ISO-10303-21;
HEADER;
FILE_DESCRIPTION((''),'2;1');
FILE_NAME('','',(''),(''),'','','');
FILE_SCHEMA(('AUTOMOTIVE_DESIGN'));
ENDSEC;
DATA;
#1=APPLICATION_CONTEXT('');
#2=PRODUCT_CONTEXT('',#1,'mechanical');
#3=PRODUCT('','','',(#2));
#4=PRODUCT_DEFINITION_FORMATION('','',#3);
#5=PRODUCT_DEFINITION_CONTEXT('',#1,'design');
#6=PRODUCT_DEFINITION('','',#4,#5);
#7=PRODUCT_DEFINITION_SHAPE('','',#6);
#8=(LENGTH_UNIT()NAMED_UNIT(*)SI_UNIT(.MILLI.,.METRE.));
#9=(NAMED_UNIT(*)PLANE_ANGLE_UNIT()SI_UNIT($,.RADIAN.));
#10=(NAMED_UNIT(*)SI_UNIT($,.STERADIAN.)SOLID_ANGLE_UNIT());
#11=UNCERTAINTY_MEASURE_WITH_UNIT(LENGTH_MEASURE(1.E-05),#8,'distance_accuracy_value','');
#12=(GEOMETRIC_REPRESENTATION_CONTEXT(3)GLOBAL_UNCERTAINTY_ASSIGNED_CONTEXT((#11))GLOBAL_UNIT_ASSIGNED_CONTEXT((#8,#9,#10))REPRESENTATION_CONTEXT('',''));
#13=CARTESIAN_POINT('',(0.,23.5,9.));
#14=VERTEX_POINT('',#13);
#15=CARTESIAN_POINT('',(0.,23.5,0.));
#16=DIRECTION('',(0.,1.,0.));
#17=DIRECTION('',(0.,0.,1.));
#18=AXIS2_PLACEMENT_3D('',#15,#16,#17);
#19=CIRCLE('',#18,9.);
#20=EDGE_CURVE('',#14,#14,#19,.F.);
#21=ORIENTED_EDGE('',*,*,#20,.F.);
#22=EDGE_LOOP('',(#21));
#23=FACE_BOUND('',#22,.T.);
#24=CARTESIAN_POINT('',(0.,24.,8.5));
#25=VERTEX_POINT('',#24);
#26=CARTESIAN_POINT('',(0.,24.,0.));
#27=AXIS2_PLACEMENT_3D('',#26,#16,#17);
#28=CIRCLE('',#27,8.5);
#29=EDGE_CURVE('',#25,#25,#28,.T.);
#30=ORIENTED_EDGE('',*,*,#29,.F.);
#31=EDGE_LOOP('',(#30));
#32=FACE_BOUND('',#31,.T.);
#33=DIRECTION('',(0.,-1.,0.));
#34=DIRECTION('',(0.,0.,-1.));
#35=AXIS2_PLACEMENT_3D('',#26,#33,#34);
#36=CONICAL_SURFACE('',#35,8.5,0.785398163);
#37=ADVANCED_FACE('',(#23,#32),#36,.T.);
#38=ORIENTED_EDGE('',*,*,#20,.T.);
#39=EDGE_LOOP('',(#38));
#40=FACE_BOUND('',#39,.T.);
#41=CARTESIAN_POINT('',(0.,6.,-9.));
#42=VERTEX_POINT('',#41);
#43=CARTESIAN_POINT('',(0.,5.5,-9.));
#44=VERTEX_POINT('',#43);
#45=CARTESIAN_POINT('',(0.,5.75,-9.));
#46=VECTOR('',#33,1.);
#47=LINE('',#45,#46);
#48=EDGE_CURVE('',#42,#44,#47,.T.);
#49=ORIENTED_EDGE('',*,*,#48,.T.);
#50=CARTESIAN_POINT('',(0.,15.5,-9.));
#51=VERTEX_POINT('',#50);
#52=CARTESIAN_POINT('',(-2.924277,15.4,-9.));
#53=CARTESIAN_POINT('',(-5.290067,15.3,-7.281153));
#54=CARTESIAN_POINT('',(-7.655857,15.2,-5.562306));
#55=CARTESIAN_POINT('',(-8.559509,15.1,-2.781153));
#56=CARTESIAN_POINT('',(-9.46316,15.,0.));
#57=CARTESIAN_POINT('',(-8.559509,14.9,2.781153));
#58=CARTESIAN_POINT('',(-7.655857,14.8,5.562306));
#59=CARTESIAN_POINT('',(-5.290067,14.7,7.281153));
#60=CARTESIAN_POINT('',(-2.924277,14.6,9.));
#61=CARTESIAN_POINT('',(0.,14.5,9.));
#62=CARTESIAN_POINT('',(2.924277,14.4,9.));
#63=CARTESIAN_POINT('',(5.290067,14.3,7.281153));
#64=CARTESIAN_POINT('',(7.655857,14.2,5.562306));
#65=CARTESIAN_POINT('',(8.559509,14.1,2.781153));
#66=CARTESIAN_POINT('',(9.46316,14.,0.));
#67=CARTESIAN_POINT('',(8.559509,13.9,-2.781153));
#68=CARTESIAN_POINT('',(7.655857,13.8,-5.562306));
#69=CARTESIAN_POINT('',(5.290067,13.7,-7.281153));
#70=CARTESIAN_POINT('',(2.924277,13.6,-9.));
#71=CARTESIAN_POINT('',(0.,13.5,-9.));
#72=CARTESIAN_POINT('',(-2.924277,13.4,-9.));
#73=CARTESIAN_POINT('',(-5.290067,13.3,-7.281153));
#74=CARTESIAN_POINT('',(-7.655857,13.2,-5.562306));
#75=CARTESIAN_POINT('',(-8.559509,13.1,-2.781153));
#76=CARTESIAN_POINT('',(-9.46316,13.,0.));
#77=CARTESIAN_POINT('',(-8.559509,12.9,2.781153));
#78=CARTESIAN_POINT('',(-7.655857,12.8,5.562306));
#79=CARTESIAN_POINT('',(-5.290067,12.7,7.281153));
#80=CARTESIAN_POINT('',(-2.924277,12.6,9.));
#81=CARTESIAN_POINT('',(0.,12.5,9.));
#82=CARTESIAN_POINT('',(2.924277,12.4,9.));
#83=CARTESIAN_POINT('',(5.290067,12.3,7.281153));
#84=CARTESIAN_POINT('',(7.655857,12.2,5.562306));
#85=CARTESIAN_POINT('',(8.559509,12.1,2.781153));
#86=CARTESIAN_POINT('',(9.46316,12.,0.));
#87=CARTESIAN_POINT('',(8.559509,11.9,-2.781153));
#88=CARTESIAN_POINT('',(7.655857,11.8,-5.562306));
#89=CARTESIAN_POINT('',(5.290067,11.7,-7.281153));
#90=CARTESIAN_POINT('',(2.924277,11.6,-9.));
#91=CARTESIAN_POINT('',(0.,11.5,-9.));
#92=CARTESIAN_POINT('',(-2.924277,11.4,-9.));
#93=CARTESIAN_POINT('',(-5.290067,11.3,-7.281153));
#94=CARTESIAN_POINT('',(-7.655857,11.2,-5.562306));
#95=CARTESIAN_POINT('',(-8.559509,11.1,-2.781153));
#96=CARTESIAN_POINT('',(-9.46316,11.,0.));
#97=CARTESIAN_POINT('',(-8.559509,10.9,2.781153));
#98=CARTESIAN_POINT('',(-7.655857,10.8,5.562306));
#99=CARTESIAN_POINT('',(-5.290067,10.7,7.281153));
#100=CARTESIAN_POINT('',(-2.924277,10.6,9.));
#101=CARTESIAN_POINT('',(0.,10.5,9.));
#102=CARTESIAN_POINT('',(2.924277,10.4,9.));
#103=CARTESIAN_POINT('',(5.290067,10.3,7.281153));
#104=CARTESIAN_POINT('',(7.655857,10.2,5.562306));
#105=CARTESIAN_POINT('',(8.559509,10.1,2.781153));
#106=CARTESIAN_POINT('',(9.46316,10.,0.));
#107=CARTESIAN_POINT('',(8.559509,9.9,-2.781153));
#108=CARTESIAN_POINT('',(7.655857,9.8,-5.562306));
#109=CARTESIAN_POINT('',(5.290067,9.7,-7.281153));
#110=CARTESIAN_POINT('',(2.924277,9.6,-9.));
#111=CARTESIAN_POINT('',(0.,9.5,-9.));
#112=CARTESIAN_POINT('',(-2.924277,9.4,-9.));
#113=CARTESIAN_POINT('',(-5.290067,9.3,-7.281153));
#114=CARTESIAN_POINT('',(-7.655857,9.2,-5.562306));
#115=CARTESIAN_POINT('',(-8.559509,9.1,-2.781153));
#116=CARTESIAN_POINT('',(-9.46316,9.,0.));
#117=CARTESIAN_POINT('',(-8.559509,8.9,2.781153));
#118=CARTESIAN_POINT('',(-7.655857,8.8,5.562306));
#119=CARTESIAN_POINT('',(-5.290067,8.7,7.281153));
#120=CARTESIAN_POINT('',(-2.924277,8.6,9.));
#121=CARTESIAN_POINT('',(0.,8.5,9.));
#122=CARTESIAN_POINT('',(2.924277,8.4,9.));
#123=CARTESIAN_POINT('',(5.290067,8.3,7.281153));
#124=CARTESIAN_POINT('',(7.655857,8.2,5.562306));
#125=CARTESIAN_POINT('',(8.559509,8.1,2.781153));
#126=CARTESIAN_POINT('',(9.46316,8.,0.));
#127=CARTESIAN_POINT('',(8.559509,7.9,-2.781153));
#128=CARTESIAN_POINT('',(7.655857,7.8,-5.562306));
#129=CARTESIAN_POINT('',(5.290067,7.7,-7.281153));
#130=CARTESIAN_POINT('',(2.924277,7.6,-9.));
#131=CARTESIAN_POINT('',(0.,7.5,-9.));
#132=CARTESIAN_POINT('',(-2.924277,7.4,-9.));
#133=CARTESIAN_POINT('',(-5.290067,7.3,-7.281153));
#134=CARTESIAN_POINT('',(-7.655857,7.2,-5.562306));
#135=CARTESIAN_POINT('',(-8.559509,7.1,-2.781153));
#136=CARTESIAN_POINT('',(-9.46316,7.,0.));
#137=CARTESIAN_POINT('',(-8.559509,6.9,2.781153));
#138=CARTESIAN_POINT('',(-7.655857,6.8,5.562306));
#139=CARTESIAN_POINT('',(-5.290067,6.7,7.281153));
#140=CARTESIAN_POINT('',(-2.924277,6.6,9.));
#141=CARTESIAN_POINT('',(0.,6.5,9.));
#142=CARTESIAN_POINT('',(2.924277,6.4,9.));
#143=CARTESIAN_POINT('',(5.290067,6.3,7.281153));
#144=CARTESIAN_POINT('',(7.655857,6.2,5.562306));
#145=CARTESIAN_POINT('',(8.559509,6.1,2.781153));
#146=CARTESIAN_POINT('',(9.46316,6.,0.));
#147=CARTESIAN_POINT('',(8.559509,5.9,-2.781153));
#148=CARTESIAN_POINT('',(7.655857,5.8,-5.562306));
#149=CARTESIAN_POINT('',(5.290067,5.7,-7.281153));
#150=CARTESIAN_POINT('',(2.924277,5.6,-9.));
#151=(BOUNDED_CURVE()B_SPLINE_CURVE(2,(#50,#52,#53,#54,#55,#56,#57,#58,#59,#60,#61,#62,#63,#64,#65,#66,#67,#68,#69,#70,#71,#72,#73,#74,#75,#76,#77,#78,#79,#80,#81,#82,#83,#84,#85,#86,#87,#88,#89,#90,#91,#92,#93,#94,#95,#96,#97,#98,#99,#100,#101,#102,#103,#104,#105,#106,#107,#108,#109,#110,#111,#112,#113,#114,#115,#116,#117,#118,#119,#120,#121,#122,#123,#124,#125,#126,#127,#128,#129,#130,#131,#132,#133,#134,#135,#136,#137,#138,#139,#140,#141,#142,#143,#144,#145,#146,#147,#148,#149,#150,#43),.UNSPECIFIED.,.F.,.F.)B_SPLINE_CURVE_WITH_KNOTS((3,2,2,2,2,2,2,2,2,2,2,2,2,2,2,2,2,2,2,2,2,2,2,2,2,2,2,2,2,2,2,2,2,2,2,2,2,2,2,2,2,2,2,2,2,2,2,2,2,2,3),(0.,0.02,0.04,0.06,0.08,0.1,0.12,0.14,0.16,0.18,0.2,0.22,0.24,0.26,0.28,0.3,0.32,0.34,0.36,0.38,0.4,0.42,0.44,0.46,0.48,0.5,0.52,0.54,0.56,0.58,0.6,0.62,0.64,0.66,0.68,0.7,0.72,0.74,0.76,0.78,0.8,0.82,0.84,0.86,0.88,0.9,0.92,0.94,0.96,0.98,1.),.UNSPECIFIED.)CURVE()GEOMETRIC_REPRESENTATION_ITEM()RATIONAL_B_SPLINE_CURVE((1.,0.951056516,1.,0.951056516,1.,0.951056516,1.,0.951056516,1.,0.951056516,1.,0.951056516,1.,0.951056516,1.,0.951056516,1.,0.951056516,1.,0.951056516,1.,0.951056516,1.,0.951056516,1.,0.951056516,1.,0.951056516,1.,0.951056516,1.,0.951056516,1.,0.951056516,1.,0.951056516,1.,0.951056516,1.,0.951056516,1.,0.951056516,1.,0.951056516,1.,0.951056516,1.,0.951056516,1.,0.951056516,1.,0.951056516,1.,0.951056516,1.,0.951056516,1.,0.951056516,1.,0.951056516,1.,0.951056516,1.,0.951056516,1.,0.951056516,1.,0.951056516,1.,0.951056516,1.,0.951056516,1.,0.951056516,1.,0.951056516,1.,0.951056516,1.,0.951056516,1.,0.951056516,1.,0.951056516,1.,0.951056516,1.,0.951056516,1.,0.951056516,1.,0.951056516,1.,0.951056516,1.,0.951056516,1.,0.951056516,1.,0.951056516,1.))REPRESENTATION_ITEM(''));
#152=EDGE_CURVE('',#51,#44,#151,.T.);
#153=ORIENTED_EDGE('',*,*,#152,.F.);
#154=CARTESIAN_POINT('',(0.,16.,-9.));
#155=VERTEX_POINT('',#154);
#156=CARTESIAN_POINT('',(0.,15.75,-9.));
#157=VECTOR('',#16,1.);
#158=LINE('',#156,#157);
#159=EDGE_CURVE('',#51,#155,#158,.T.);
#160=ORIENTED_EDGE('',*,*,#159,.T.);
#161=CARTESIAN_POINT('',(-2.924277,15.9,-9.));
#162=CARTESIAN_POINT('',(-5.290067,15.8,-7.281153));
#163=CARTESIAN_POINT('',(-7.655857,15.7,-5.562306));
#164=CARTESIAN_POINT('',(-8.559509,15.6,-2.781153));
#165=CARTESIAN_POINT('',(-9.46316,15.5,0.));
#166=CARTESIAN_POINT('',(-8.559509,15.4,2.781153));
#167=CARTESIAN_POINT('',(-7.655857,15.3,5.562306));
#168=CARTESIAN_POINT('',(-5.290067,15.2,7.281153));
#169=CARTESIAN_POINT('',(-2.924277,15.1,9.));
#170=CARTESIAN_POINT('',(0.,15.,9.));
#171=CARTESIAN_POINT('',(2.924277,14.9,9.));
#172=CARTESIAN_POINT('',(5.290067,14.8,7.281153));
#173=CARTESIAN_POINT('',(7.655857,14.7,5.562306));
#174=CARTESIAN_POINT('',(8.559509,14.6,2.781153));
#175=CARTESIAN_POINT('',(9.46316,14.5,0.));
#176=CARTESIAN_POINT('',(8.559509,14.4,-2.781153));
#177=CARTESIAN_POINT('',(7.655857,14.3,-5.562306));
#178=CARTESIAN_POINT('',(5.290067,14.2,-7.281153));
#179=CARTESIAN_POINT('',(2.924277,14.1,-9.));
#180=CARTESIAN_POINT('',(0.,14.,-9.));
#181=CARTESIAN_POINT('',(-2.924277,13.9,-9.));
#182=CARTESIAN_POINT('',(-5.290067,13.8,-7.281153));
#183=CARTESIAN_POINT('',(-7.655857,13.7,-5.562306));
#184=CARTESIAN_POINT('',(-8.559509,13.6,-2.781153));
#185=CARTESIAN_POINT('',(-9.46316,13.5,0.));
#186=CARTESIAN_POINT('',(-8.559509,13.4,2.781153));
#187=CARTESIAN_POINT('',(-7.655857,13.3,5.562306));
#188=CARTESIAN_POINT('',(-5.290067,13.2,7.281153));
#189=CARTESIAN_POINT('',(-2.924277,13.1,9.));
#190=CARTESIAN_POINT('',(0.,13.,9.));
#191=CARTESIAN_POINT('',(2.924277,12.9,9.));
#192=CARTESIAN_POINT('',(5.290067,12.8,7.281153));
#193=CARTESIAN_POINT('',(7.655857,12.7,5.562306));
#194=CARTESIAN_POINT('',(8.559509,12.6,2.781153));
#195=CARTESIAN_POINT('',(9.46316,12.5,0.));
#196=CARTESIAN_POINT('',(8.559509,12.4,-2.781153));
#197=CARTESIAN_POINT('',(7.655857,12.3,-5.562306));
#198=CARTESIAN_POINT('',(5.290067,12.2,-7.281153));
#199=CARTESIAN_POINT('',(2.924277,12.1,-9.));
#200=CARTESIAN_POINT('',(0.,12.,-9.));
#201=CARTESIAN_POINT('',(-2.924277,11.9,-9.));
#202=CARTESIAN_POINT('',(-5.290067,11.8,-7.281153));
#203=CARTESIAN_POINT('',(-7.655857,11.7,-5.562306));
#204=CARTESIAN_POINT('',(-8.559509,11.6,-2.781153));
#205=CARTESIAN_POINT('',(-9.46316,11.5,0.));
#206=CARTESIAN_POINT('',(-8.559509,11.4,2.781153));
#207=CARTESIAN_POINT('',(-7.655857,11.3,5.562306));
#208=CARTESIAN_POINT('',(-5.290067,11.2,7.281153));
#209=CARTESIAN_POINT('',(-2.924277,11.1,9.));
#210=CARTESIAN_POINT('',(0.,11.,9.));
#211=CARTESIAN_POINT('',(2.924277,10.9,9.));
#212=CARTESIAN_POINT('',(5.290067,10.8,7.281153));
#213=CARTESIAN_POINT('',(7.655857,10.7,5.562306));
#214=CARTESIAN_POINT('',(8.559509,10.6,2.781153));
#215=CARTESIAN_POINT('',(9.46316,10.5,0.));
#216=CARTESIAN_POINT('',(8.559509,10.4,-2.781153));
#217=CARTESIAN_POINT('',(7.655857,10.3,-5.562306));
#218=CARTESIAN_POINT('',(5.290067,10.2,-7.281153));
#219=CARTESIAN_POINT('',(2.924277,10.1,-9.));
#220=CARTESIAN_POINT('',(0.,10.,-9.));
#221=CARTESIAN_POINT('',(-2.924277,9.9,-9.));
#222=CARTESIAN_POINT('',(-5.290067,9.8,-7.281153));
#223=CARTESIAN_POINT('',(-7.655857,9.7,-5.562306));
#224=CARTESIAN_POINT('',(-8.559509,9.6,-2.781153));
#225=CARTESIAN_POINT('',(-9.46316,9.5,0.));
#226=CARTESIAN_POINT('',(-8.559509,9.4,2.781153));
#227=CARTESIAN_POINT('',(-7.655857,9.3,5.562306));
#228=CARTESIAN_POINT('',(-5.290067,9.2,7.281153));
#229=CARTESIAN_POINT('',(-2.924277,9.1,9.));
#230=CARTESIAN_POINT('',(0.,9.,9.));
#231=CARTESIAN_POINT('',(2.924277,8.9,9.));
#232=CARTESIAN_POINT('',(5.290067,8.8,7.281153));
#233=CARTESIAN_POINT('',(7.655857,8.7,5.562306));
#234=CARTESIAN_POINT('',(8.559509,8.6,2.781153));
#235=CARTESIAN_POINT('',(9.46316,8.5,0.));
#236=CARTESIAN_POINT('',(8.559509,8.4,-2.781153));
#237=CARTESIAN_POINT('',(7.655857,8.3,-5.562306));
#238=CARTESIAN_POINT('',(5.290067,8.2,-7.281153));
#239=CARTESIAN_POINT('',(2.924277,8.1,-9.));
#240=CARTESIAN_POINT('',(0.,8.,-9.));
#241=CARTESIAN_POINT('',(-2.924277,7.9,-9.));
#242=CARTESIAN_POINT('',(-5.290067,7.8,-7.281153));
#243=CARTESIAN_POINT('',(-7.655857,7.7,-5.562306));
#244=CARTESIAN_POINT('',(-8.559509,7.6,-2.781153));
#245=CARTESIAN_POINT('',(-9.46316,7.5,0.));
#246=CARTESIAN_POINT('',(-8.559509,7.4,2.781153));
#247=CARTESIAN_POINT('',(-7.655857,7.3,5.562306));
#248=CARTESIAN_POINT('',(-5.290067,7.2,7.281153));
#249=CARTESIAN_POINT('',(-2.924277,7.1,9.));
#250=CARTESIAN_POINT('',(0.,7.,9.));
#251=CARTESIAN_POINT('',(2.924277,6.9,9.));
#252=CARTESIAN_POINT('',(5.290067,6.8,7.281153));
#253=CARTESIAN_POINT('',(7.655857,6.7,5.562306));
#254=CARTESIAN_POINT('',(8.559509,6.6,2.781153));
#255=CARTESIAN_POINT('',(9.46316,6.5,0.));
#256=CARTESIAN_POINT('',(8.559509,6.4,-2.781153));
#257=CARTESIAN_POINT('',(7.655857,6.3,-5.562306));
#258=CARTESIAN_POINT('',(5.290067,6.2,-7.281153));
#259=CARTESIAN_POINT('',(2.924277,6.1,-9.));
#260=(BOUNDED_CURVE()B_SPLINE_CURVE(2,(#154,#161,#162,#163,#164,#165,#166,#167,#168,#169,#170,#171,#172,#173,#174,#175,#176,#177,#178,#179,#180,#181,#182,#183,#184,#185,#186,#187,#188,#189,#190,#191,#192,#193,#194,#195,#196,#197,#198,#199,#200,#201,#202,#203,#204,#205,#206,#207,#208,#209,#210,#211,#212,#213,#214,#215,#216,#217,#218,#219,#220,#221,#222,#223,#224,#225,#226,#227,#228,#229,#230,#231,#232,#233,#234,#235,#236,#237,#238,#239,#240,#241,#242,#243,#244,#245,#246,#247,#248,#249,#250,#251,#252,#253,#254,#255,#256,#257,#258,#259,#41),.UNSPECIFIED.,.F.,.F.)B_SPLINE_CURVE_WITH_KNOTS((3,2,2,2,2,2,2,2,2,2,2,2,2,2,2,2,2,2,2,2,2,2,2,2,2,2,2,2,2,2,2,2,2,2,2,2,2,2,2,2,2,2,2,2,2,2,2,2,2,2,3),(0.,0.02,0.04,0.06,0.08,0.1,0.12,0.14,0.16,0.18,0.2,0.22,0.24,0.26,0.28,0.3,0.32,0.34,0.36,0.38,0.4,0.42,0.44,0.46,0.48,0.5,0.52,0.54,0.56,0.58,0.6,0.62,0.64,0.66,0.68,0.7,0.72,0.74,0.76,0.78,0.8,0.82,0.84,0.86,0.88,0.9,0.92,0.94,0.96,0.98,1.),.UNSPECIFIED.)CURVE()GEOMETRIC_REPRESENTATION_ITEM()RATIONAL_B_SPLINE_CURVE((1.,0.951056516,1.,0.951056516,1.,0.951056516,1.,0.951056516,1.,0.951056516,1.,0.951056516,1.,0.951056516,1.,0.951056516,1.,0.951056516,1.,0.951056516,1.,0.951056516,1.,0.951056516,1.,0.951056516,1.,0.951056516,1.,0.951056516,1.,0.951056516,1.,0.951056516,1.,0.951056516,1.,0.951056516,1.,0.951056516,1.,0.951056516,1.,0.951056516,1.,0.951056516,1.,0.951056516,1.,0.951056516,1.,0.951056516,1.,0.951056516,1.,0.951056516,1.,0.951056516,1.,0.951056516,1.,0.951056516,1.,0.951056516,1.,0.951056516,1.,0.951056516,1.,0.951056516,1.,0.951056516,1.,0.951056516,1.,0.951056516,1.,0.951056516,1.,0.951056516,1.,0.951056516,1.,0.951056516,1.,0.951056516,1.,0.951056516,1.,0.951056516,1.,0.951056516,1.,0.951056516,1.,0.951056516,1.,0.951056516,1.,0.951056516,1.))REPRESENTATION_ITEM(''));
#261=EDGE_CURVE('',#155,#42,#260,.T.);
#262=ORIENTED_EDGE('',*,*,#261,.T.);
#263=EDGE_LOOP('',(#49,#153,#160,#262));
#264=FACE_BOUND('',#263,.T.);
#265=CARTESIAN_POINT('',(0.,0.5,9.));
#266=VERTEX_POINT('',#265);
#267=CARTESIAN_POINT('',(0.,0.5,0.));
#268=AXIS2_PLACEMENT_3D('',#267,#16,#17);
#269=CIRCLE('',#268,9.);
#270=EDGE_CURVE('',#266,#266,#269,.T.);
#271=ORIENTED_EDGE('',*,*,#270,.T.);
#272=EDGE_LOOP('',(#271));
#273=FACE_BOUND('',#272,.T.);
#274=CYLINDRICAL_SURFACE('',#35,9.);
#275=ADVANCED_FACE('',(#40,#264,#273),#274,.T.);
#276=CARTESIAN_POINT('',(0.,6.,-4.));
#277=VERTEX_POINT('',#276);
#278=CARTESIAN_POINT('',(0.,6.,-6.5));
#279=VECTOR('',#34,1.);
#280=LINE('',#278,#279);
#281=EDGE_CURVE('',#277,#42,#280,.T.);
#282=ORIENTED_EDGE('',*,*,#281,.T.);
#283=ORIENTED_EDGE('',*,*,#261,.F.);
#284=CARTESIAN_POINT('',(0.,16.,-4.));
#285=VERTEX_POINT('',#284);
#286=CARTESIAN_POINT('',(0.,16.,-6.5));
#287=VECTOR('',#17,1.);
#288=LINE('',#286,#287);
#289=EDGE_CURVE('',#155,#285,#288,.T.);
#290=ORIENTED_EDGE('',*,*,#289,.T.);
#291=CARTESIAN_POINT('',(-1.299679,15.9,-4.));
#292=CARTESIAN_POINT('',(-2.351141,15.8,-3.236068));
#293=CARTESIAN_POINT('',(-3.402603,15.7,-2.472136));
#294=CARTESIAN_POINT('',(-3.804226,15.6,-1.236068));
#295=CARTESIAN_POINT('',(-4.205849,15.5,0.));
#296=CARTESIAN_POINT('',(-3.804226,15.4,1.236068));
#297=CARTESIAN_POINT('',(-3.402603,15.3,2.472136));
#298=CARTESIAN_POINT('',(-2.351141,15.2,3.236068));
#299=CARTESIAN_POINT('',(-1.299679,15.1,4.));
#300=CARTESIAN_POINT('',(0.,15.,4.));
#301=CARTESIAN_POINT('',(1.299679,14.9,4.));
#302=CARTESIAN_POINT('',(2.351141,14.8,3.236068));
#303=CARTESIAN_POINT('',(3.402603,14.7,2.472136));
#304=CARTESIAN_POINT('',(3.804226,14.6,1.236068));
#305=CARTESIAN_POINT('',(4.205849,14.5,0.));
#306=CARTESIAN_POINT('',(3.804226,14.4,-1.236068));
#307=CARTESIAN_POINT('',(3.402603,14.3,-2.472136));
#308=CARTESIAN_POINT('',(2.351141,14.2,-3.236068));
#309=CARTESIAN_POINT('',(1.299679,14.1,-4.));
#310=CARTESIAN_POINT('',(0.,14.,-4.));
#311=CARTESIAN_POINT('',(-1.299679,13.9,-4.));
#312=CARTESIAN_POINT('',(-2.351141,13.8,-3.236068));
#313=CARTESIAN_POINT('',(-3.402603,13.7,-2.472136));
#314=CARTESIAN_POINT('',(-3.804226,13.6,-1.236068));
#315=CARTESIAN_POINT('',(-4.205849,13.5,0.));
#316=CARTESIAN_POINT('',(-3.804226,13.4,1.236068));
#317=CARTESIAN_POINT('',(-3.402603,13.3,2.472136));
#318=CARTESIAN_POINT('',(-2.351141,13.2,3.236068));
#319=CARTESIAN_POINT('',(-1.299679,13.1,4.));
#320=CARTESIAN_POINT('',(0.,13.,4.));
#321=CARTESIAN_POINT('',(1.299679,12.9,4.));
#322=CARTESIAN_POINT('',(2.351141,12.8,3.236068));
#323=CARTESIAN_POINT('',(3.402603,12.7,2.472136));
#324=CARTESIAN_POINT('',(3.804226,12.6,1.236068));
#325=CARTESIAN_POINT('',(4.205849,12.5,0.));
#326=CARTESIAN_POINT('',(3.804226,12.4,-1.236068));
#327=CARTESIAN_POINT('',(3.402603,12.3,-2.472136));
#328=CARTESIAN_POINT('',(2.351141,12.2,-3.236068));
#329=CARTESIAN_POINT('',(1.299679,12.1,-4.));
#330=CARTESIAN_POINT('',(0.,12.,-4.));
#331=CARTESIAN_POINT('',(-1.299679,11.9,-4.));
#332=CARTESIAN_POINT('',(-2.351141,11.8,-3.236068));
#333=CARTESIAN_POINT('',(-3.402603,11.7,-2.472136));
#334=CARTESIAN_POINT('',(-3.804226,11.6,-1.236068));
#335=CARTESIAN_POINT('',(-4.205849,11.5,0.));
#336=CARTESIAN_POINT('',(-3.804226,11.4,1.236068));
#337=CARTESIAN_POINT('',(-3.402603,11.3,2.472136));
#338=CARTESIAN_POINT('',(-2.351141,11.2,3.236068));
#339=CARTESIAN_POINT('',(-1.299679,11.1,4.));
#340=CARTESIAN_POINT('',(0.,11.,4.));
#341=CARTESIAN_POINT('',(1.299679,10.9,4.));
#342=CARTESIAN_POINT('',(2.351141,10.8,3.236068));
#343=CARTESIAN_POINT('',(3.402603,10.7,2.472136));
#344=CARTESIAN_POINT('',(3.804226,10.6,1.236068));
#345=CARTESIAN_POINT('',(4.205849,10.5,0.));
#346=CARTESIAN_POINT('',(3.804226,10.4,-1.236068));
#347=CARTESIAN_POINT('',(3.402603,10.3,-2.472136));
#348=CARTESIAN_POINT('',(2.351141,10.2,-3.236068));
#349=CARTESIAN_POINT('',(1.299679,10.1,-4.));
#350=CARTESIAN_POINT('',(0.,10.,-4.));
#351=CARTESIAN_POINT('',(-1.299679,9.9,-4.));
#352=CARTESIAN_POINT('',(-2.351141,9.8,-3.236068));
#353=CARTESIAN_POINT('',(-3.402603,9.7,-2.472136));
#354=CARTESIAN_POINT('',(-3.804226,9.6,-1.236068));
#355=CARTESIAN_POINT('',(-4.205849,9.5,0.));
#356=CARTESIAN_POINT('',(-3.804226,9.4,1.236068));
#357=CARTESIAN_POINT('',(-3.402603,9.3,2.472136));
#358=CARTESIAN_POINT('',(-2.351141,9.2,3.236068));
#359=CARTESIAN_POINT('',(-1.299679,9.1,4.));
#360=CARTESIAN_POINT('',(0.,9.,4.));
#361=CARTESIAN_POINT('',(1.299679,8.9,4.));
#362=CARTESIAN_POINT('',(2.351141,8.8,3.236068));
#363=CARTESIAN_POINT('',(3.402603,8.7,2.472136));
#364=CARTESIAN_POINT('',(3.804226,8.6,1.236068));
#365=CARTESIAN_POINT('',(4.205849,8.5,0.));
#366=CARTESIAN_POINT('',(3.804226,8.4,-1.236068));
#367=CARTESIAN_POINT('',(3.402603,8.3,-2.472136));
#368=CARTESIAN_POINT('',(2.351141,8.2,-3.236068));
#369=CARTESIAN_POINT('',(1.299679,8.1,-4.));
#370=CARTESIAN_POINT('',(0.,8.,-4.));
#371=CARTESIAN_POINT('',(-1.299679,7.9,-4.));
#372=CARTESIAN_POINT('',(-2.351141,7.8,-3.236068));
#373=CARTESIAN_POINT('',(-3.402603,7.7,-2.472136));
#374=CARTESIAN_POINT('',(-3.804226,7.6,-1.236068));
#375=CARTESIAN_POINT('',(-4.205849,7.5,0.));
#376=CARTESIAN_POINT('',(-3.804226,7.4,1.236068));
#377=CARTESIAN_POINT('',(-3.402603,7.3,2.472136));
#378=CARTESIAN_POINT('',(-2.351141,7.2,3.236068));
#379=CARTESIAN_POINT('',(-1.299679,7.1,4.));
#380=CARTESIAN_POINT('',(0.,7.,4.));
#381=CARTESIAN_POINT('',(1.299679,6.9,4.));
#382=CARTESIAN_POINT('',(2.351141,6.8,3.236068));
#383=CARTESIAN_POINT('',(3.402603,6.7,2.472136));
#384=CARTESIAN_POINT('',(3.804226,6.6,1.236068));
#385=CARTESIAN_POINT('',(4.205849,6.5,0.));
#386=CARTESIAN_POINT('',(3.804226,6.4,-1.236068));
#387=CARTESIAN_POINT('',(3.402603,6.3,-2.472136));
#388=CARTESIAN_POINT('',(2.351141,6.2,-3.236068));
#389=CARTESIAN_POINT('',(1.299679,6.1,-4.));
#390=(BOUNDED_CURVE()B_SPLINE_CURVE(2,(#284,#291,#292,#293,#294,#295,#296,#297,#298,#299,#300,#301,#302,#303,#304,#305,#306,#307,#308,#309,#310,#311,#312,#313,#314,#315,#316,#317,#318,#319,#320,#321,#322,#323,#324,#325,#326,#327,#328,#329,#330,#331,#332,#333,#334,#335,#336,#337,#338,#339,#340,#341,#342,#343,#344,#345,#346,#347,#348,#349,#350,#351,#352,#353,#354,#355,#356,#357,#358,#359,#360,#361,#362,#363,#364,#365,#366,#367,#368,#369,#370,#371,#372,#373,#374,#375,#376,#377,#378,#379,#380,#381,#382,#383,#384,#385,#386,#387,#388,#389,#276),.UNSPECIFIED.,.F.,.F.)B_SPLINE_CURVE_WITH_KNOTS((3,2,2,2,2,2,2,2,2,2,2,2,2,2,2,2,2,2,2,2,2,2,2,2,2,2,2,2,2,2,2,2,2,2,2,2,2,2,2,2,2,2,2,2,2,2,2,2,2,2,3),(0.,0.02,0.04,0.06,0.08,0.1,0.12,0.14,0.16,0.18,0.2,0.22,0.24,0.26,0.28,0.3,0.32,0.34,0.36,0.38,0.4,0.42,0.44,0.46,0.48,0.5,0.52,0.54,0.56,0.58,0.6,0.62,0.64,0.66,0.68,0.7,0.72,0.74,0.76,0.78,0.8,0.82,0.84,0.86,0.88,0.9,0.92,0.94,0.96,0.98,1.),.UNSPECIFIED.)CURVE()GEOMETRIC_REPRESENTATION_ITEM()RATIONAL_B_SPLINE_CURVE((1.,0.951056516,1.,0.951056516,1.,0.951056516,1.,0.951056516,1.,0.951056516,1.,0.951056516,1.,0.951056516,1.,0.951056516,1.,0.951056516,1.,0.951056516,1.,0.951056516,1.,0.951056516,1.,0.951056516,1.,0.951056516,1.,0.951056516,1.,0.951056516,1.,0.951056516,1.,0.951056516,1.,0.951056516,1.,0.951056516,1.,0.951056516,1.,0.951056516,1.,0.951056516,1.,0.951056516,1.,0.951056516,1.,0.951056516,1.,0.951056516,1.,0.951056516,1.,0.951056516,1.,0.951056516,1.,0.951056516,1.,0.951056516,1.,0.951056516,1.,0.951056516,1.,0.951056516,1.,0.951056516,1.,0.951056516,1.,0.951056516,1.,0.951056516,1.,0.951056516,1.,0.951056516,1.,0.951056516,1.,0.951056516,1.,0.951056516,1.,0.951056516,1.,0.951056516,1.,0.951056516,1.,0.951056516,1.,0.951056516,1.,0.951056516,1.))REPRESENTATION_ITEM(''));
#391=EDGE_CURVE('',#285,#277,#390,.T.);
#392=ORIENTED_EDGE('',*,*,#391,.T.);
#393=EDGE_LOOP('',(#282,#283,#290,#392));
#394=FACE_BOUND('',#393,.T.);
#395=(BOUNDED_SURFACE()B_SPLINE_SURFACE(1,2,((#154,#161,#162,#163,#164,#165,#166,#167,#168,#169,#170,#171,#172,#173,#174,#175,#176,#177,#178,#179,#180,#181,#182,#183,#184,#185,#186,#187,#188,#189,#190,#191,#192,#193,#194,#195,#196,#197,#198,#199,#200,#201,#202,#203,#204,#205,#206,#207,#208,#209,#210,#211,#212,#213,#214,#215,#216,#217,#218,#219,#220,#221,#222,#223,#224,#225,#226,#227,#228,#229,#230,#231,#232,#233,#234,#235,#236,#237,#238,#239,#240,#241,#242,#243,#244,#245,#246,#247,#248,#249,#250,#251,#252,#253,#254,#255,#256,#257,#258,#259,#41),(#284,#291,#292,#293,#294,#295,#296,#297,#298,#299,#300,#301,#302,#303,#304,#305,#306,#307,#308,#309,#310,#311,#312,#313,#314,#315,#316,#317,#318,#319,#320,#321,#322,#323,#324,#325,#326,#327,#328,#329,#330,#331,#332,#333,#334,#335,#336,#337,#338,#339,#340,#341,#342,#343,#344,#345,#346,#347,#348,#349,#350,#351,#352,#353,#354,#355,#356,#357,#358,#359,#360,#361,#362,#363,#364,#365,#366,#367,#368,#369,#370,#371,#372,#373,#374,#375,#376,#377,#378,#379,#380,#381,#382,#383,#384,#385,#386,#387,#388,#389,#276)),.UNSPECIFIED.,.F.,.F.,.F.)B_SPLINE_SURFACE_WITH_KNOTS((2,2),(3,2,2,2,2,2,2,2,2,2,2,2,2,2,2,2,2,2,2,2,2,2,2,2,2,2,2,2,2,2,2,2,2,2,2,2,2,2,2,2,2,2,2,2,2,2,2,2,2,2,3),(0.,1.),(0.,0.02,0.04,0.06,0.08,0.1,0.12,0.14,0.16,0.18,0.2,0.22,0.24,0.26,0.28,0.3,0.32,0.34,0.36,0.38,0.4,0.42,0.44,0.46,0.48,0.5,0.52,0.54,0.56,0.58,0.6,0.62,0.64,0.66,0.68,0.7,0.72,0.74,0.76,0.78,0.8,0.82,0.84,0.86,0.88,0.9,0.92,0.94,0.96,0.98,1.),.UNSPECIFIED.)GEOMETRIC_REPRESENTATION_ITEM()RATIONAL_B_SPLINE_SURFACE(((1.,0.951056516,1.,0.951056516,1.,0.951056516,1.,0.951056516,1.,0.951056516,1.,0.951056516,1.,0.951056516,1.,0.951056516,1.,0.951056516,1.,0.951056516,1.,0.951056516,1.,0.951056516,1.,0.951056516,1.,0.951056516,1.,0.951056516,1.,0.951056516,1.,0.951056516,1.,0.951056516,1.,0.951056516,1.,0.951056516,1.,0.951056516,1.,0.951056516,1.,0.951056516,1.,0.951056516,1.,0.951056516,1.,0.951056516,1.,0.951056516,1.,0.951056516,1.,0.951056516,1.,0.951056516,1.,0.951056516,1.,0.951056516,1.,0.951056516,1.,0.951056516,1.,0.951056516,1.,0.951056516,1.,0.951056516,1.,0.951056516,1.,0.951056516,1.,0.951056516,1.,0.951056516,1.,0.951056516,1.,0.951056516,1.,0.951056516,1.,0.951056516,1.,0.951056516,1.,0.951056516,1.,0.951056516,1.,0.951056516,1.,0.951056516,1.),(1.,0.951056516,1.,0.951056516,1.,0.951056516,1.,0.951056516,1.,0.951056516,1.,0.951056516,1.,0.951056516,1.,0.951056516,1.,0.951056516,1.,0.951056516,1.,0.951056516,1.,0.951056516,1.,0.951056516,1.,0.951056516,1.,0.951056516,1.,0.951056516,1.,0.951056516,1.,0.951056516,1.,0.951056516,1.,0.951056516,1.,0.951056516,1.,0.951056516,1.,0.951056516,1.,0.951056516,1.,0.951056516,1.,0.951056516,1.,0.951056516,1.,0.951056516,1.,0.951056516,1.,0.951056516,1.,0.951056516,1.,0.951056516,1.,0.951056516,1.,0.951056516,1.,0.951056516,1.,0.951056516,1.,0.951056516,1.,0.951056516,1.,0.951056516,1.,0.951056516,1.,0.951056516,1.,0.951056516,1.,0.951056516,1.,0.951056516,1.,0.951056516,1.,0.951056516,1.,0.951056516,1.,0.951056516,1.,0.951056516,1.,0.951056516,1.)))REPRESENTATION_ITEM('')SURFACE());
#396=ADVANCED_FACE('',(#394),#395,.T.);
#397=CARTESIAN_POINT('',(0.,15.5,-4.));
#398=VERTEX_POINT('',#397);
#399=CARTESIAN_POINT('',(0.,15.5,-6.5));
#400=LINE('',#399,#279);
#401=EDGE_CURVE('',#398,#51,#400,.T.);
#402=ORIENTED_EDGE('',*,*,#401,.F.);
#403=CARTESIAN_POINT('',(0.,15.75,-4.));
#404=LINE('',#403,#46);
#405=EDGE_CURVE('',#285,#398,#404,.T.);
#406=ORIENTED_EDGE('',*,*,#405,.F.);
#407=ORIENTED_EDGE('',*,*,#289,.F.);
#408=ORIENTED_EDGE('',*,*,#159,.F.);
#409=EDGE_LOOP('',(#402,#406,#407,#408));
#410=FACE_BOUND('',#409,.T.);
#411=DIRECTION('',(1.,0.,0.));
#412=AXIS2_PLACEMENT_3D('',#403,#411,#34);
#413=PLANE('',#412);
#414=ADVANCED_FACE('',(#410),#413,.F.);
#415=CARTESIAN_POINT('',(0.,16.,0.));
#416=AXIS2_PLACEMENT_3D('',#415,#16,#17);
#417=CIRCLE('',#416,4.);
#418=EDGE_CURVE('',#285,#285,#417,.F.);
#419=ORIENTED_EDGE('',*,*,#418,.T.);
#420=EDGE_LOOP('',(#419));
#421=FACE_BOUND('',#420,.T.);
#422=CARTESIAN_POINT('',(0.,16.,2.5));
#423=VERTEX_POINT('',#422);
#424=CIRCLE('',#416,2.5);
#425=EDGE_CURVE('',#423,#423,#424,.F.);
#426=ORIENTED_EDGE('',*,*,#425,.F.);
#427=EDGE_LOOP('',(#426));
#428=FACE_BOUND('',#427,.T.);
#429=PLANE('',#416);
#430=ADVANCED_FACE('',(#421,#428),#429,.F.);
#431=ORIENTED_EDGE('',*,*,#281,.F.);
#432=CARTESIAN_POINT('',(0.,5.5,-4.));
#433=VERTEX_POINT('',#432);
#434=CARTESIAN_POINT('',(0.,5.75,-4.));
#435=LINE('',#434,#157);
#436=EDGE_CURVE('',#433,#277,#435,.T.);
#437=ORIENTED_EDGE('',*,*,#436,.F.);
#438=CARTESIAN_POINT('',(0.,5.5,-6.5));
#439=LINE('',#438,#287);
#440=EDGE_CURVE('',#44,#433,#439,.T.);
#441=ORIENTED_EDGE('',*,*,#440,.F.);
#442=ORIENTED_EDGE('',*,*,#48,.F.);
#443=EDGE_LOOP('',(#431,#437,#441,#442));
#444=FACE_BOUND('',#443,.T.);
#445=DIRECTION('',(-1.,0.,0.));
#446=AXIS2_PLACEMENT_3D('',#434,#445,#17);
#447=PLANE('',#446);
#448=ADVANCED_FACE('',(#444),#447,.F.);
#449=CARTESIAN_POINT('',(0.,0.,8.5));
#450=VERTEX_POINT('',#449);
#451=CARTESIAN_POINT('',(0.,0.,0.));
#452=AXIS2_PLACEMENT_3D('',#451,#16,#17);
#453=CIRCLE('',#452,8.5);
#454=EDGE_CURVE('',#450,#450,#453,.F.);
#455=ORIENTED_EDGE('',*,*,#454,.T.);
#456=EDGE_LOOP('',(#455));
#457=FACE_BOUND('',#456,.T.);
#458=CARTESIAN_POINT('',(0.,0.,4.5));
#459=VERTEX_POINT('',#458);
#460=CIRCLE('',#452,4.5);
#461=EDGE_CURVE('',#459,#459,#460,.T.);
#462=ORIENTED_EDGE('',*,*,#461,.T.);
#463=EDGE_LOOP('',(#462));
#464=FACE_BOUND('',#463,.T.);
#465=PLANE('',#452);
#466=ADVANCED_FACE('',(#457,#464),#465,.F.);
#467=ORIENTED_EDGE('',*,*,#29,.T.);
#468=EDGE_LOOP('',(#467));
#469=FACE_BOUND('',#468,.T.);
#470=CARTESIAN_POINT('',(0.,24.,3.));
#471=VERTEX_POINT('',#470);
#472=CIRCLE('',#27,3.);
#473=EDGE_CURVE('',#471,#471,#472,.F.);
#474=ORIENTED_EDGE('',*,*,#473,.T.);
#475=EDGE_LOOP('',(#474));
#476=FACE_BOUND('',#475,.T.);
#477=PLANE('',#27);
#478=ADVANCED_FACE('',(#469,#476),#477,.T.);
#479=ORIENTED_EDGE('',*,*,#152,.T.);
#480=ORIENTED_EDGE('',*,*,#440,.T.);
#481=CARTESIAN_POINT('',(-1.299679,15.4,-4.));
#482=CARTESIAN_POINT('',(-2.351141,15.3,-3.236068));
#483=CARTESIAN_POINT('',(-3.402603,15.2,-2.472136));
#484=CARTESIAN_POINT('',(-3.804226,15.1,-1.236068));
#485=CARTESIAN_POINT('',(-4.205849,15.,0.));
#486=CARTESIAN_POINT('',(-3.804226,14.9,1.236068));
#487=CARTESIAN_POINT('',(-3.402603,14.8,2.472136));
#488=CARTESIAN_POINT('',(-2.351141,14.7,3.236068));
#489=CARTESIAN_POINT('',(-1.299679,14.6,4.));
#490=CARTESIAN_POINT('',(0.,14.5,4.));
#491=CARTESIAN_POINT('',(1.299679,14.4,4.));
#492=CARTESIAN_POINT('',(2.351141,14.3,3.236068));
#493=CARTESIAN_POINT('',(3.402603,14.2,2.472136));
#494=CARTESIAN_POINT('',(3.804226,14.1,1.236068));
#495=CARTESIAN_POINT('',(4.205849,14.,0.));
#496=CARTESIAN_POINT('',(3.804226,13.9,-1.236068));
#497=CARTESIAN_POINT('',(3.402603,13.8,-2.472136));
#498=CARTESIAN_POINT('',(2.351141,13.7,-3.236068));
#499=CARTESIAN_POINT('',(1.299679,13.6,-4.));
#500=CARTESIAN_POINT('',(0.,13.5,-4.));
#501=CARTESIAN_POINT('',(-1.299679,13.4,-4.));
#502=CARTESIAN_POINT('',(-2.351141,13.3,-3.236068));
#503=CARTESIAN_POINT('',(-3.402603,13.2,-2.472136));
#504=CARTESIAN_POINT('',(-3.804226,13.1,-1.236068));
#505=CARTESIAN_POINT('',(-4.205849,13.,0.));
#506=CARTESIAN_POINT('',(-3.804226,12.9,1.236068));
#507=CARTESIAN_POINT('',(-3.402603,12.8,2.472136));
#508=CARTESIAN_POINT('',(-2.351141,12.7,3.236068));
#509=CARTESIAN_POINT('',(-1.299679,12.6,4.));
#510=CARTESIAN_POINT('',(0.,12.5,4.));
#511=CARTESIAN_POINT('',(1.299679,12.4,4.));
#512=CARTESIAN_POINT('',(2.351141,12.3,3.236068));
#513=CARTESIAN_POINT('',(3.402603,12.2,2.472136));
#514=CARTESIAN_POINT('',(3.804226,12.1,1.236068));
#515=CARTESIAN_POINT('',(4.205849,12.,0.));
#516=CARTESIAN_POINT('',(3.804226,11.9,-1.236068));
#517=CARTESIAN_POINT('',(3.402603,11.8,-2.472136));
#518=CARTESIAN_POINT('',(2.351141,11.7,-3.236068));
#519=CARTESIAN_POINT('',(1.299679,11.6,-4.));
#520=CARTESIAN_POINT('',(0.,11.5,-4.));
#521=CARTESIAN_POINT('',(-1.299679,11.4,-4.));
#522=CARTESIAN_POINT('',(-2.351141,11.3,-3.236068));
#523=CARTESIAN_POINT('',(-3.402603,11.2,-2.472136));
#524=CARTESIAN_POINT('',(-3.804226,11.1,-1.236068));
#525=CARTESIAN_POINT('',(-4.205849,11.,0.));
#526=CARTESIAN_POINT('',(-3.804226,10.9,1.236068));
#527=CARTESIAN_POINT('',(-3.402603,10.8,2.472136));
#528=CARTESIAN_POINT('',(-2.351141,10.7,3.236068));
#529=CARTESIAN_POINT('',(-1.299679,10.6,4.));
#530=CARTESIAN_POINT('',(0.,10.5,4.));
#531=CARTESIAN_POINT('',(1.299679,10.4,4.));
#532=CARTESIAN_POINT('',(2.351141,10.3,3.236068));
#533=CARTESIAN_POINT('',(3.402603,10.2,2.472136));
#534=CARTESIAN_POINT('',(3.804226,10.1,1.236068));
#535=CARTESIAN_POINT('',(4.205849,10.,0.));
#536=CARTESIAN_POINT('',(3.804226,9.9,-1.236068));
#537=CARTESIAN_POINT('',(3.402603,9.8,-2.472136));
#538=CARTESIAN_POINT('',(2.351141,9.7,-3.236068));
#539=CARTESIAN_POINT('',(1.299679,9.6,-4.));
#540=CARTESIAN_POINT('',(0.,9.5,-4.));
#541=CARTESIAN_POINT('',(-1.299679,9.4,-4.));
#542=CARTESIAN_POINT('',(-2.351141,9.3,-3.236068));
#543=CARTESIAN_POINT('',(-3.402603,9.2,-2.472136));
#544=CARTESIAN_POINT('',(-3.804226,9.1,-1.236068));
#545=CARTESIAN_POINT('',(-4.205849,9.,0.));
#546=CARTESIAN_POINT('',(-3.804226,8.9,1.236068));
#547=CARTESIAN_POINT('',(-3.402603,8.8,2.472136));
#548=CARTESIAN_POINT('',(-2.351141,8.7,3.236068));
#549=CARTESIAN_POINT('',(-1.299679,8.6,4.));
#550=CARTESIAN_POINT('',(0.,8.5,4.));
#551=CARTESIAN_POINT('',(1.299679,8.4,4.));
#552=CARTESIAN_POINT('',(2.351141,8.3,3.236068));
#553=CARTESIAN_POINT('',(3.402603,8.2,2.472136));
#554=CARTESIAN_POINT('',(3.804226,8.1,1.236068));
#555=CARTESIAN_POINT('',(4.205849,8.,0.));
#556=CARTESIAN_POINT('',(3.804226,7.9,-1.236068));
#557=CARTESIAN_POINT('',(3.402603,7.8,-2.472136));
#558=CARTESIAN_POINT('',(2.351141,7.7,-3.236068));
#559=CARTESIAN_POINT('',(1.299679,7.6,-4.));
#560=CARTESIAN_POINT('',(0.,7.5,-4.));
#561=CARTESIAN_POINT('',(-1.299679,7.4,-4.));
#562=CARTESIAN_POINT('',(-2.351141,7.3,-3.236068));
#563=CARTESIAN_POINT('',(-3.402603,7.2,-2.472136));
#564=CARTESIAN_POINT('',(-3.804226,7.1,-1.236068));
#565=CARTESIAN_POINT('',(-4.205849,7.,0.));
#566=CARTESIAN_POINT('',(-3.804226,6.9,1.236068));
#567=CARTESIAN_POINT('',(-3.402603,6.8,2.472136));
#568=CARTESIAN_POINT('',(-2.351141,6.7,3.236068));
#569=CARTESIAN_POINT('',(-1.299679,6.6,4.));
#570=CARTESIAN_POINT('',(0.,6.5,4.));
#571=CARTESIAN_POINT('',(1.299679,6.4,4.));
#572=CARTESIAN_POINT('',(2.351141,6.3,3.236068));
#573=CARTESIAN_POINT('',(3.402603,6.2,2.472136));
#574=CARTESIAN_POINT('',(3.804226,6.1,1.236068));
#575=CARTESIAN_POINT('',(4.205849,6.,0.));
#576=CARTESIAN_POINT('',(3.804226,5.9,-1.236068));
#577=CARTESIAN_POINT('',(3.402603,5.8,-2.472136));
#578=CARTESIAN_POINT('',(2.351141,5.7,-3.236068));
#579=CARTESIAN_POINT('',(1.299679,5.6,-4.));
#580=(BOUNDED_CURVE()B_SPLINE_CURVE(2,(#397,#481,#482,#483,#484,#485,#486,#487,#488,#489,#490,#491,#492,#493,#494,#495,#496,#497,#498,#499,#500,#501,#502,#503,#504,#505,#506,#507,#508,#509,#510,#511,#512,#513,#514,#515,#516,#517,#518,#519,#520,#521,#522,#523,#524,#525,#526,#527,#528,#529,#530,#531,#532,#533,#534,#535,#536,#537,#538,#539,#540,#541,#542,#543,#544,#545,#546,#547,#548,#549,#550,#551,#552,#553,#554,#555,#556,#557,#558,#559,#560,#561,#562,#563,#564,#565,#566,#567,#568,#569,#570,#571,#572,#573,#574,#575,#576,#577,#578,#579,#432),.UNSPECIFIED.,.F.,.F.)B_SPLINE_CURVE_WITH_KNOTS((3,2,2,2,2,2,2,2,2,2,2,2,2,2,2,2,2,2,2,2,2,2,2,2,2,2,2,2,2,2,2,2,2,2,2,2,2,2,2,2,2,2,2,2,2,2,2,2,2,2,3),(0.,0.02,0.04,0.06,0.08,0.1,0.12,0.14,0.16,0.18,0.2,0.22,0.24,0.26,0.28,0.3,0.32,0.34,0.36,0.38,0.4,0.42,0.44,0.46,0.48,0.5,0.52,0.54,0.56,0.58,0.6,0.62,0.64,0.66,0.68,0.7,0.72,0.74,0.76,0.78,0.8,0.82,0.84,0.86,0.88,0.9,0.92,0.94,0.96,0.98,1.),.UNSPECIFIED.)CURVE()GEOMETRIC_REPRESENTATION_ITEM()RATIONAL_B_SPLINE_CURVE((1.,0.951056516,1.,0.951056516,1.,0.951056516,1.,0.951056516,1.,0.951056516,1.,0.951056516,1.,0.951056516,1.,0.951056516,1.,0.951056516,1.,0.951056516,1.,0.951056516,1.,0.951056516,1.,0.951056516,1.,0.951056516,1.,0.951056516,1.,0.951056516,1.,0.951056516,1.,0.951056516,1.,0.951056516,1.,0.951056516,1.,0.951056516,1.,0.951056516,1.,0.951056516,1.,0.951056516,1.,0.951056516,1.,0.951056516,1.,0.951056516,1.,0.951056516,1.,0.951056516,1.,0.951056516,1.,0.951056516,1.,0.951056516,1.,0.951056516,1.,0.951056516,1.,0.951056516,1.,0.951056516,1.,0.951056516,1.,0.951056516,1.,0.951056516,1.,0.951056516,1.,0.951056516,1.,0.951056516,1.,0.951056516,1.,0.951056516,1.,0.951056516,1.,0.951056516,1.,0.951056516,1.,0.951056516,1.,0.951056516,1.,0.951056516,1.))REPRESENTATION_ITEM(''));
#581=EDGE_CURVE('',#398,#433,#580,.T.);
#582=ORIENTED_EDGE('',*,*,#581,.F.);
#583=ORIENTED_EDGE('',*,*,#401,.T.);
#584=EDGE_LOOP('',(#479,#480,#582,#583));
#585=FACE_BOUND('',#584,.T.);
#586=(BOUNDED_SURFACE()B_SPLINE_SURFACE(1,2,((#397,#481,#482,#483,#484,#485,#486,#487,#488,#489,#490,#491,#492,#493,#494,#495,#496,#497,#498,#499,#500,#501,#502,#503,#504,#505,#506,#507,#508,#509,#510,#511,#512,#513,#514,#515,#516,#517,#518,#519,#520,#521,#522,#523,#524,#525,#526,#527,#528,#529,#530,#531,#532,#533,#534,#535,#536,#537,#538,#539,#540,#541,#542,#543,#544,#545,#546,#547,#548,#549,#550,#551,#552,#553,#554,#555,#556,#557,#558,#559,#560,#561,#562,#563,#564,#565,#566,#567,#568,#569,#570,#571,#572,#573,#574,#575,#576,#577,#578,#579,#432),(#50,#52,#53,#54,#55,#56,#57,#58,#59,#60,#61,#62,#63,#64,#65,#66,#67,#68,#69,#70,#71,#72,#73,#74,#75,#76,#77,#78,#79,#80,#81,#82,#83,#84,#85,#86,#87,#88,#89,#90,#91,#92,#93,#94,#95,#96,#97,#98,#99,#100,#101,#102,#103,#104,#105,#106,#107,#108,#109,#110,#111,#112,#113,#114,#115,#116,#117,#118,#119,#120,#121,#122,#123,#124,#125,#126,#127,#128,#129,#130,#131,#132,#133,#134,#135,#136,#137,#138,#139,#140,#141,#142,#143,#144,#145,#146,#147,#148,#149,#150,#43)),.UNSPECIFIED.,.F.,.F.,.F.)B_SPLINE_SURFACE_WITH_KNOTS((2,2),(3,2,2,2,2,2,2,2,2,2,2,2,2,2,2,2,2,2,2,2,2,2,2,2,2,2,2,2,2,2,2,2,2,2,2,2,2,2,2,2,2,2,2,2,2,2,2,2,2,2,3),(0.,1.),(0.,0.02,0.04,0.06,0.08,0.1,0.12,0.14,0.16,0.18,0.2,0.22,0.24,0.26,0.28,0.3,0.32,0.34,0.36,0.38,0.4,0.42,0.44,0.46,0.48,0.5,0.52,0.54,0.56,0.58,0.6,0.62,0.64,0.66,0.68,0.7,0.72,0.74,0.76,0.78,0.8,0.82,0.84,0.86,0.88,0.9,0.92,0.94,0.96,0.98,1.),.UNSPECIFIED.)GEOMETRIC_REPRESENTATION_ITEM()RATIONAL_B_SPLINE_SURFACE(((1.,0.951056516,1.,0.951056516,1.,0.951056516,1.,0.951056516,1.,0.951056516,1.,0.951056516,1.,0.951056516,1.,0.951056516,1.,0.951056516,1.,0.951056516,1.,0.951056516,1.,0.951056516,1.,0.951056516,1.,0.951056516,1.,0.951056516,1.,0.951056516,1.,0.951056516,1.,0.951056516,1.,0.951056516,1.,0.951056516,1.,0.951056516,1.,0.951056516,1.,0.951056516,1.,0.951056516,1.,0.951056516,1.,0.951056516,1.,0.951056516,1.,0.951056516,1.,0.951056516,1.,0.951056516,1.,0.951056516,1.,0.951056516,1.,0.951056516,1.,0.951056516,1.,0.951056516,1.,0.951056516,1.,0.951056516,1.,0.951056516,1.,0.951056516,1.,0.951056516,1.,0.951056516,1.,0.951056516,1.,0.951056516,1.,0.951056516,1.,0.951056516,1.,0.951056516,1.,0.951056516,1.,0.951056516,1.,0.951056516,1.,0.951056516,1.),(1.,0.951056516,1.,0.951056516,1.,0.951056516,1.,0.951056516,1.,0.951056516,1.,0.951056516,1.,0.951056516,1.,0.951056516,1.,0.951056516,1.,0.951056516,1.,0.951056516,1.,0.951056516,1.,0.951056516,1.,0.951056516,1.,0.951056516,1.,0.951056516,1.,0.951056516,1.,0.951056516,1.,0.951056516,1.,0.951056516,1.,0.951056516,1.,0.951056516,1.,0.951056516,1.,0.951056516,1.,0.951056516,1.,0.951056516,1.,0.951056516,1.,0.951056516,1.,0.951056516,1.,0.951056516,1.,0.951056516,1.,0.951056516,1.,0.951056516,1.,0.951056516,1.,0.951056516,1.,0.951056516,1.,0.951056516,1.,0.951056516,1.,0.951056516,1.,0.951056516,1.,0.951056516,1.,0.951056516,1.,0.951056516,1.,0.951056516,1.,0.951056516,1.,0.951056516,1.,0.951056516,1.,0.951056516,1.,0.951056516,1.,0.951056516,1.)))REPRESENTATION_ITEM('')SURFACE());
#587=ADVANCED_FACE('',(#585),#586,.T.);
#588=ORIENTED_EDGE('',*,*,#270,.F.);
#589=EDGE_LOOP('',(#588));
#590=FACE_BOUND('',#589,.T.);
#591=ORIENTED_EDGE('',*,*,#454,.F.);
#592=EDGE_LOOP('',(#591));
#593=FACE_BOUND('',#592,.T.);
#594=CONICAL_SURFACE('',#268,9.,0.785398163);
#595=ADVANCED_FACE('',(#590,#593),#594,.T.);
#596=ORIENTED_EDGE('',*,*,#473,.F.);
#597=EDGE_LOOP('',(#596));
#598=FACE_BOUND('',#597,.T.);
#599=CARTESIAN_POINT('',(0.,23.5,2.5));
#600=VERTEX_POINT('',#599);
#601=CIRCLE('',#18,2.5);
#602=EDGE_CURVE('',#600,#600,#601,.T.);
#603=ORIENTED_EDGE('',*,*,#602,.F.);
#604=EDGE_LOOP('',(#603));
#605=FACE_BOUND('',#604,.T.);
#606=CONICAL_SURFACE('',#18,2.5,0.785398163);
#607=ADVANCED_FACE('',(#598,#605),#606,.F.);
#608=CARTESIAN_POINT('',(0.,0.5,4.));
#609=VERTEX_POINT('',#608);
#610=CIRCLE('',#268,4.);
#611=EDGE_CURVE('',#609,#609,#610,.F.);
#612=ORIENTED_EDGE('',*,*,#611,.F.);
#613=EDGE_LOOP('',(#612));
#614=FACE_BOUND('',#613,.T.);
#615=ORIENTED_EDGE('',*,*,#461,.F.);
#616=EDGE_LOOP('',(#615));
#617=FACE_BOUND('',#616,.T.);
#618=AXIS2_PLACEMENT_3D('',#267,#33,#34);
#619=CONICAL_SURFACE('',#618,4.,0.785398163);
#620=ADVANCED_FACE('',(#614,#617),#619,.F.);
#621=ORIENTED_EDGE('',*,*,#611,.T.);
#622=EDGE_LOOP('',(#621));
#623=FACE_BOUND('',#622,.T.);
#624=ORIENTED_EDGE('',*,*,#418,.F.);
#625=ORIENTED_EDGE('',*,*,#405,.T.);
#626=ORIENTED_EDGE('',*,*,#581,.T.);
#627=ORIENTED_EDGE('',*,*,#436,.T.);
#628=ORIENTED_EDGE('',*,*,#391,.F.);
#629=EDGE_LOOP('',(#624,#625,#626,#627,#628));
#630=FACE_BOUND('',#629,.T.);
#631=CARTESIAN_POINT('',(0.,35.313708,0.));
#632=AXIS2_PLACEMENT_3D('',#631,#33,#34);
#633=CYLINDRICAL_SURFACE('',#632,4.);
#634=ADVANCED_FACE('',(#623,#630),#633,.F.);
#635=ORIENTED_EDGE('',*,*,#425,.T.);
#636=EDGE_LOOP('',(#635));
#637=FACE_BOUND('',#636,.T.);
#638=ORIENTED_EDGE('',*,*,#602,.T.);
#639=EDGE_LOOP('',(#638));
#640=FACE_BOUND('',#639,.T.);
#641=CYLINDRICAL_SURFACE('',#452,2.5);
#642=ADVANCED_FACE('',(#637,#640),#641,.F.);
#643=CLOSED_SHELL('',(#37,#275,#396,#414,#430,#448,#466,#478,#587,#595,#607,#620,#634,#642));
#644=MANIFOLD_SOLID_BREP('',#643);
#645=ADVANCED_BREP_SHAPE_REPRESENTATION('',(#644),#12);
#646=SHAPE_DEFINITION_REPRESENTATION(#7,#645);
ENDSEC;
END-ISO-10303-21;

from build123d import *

# Parameters (mm, degrees)
SKETCH1_R           = 9
BOSS_EXTRUDE1_DEPTH = 24
SKETCH2_R           = 2.5
CUT_EXTRUDE1_DEPTH  = 28.166155414
SKETCH3_R           = 4
CUT_EXTRUDE2_DEPTH  = 16
CHAMFER1_SIZE       = 0.5
CUT_SWEEP2_PITCH    = 2


with BuildPart() as part:
    # Sketch1 → Boss-Extrude1 (new body)
    with BuildSketch(Plane(origin=(0, 0, 0), x_dir=(1, 0, 0), z_dir=(0, 1, 0))):
        with Locations(Location((0, 0, 0), (0, 0, 270))):
            Circle(SKETCH1_R)
    extrude(amount=BOSS_EXTRUDE1_DEPTH)

    # Sketch2 → Cut-Extrude1 (cut, through all)
    with BuildSketch(Plane(origin=(0, 24, 0), x_dir=(1, 0, 0), z_dir=(0, 1, 0))):
        with Locations(Location((0, 0, 0), (0, 0, 270))):
            Circle(SKETCH2_R)
    extrude(amount=-CUT_EXTRUDE1_DEPTH, mode=Mode.SUBTRACT)

    # Sketch3 → Cut-Extrude2 (cut)
    with BuildSketch(Plane.XZ):
        with Locations(Location((0, 0, 0), (0, 0, 270))):
            Circle(SKETCH3_R)
    extrude(amount=-CUT_EXTRUDE2_DEPTH, mode=Mode.SUBTRACT)

    # Chamfer1
    chamfer1_edges = [part.edges().sort_by_distance(p)[0] for p in [
        (0, 0, 4),
        (0, 0, -9),
        (0, 24, -9),
        (0, 24, -2.5),
    ]]
    chamfer(chamfer1_edges, length=CHAMFER1_SIZE)

    # Cut-Sweep2: the profile of Sketch8 profile screwed along a left-hand helix of 5 turns, 10 arcs to a turn; built about Z, then put on its axis
    cut_sweep2_z = Axis((0, 0, 0), (0, 0, 1))
    cut_sweep2_corners = [(9, 0, 0), (3.9997, 0, 0), (3.9997, 0, 0.5), (9, 0, 0.5)]
    with BuildLine(mode=Mode.PRIVATE) as cut_sweep2_profile:
        Line(cut_sweep2_corners[0], cut_sweep2_corners[1])
        Line(cut_sweep2_corners[1], cut_sweep2_corners[2])
        Line(cut_sweep2_corners[2], cut_sweep2_corners[3])
        Line(cut_sweep2_corners[3], cut_sweep2_corners[0])
    cut_sweep2_cap = Face(cut_sweep2_profile.wire())
    cut_sweep2_turn_angles = [0, -18, -36, -54, -72, -90, -108, -126, -144, -162, -180, -198, -216, -234, -252, -270, -288, -306, -324, -342, -360]
    cut_sweep2_turn_weights = [1, 0.9510565162951535, 1, 0.9510565162951535, 1, 0.9510565162951535, 1, 0.9510565162951535, 1, 0.9510565162951535, 1, 0.9510565162951535, 1, 0.9510565162951535, 1, 0.9510565162951535, 1, 0.9510565162951535, 1, 0.9510565162951535, 1]
    cut_sweep2_turn_rails = [Edge.make_bspline([Vector(p[0], p[1], 0).rotate(cut_sweep2_z, cut_sweep2_turn_angles[k]) / cut_sweep2_turn_weights[k] + Vector(0, 0, p[2] + -CUT_SWEEP2_PITCH * cut_sweep2_turn_angles[k] / 360) for k in range(21)], [0, 0, 0, 1, 1, 2, 2, 3, 3, 4, 4, 5, 5, 6, 6, 7, 7, 8, 8, 9, 9, 10, 10, 10], 2, cut_sweep2_turn_weights) for p in cut_sweep2_corners]
    cut_sweep2_turn_sides = [Face.make_surface_from_curves(cut_sweep2_turn_rails[p[0]], cut_sweep2_turn_rails[p[1]]) for p in [(0, 1), (1, 2), (2, 3), (3, 0)]]
    cut_sweep2 = Plane(origin=(0, 16, 0), x_dir=(0, 0, -1), z_dir=(0, -1, 0)) * Solid(Shell([*[p.moved(Location((0, 0, CUT_SWEEP2_PITCH * i))) for i in range(5) for p in cut_sweep2_turn_sides], cut_sweep2_cap, cut_sweep2_cap.rotate(cut_sweep2_z, -1800).moved(Location((0, 0, -CUT_SWEEP2_PITCH * -1800 / 360)))]))
    add(cut_sweep2, mode=Mode.SUBTRACT)


solid = part.part
